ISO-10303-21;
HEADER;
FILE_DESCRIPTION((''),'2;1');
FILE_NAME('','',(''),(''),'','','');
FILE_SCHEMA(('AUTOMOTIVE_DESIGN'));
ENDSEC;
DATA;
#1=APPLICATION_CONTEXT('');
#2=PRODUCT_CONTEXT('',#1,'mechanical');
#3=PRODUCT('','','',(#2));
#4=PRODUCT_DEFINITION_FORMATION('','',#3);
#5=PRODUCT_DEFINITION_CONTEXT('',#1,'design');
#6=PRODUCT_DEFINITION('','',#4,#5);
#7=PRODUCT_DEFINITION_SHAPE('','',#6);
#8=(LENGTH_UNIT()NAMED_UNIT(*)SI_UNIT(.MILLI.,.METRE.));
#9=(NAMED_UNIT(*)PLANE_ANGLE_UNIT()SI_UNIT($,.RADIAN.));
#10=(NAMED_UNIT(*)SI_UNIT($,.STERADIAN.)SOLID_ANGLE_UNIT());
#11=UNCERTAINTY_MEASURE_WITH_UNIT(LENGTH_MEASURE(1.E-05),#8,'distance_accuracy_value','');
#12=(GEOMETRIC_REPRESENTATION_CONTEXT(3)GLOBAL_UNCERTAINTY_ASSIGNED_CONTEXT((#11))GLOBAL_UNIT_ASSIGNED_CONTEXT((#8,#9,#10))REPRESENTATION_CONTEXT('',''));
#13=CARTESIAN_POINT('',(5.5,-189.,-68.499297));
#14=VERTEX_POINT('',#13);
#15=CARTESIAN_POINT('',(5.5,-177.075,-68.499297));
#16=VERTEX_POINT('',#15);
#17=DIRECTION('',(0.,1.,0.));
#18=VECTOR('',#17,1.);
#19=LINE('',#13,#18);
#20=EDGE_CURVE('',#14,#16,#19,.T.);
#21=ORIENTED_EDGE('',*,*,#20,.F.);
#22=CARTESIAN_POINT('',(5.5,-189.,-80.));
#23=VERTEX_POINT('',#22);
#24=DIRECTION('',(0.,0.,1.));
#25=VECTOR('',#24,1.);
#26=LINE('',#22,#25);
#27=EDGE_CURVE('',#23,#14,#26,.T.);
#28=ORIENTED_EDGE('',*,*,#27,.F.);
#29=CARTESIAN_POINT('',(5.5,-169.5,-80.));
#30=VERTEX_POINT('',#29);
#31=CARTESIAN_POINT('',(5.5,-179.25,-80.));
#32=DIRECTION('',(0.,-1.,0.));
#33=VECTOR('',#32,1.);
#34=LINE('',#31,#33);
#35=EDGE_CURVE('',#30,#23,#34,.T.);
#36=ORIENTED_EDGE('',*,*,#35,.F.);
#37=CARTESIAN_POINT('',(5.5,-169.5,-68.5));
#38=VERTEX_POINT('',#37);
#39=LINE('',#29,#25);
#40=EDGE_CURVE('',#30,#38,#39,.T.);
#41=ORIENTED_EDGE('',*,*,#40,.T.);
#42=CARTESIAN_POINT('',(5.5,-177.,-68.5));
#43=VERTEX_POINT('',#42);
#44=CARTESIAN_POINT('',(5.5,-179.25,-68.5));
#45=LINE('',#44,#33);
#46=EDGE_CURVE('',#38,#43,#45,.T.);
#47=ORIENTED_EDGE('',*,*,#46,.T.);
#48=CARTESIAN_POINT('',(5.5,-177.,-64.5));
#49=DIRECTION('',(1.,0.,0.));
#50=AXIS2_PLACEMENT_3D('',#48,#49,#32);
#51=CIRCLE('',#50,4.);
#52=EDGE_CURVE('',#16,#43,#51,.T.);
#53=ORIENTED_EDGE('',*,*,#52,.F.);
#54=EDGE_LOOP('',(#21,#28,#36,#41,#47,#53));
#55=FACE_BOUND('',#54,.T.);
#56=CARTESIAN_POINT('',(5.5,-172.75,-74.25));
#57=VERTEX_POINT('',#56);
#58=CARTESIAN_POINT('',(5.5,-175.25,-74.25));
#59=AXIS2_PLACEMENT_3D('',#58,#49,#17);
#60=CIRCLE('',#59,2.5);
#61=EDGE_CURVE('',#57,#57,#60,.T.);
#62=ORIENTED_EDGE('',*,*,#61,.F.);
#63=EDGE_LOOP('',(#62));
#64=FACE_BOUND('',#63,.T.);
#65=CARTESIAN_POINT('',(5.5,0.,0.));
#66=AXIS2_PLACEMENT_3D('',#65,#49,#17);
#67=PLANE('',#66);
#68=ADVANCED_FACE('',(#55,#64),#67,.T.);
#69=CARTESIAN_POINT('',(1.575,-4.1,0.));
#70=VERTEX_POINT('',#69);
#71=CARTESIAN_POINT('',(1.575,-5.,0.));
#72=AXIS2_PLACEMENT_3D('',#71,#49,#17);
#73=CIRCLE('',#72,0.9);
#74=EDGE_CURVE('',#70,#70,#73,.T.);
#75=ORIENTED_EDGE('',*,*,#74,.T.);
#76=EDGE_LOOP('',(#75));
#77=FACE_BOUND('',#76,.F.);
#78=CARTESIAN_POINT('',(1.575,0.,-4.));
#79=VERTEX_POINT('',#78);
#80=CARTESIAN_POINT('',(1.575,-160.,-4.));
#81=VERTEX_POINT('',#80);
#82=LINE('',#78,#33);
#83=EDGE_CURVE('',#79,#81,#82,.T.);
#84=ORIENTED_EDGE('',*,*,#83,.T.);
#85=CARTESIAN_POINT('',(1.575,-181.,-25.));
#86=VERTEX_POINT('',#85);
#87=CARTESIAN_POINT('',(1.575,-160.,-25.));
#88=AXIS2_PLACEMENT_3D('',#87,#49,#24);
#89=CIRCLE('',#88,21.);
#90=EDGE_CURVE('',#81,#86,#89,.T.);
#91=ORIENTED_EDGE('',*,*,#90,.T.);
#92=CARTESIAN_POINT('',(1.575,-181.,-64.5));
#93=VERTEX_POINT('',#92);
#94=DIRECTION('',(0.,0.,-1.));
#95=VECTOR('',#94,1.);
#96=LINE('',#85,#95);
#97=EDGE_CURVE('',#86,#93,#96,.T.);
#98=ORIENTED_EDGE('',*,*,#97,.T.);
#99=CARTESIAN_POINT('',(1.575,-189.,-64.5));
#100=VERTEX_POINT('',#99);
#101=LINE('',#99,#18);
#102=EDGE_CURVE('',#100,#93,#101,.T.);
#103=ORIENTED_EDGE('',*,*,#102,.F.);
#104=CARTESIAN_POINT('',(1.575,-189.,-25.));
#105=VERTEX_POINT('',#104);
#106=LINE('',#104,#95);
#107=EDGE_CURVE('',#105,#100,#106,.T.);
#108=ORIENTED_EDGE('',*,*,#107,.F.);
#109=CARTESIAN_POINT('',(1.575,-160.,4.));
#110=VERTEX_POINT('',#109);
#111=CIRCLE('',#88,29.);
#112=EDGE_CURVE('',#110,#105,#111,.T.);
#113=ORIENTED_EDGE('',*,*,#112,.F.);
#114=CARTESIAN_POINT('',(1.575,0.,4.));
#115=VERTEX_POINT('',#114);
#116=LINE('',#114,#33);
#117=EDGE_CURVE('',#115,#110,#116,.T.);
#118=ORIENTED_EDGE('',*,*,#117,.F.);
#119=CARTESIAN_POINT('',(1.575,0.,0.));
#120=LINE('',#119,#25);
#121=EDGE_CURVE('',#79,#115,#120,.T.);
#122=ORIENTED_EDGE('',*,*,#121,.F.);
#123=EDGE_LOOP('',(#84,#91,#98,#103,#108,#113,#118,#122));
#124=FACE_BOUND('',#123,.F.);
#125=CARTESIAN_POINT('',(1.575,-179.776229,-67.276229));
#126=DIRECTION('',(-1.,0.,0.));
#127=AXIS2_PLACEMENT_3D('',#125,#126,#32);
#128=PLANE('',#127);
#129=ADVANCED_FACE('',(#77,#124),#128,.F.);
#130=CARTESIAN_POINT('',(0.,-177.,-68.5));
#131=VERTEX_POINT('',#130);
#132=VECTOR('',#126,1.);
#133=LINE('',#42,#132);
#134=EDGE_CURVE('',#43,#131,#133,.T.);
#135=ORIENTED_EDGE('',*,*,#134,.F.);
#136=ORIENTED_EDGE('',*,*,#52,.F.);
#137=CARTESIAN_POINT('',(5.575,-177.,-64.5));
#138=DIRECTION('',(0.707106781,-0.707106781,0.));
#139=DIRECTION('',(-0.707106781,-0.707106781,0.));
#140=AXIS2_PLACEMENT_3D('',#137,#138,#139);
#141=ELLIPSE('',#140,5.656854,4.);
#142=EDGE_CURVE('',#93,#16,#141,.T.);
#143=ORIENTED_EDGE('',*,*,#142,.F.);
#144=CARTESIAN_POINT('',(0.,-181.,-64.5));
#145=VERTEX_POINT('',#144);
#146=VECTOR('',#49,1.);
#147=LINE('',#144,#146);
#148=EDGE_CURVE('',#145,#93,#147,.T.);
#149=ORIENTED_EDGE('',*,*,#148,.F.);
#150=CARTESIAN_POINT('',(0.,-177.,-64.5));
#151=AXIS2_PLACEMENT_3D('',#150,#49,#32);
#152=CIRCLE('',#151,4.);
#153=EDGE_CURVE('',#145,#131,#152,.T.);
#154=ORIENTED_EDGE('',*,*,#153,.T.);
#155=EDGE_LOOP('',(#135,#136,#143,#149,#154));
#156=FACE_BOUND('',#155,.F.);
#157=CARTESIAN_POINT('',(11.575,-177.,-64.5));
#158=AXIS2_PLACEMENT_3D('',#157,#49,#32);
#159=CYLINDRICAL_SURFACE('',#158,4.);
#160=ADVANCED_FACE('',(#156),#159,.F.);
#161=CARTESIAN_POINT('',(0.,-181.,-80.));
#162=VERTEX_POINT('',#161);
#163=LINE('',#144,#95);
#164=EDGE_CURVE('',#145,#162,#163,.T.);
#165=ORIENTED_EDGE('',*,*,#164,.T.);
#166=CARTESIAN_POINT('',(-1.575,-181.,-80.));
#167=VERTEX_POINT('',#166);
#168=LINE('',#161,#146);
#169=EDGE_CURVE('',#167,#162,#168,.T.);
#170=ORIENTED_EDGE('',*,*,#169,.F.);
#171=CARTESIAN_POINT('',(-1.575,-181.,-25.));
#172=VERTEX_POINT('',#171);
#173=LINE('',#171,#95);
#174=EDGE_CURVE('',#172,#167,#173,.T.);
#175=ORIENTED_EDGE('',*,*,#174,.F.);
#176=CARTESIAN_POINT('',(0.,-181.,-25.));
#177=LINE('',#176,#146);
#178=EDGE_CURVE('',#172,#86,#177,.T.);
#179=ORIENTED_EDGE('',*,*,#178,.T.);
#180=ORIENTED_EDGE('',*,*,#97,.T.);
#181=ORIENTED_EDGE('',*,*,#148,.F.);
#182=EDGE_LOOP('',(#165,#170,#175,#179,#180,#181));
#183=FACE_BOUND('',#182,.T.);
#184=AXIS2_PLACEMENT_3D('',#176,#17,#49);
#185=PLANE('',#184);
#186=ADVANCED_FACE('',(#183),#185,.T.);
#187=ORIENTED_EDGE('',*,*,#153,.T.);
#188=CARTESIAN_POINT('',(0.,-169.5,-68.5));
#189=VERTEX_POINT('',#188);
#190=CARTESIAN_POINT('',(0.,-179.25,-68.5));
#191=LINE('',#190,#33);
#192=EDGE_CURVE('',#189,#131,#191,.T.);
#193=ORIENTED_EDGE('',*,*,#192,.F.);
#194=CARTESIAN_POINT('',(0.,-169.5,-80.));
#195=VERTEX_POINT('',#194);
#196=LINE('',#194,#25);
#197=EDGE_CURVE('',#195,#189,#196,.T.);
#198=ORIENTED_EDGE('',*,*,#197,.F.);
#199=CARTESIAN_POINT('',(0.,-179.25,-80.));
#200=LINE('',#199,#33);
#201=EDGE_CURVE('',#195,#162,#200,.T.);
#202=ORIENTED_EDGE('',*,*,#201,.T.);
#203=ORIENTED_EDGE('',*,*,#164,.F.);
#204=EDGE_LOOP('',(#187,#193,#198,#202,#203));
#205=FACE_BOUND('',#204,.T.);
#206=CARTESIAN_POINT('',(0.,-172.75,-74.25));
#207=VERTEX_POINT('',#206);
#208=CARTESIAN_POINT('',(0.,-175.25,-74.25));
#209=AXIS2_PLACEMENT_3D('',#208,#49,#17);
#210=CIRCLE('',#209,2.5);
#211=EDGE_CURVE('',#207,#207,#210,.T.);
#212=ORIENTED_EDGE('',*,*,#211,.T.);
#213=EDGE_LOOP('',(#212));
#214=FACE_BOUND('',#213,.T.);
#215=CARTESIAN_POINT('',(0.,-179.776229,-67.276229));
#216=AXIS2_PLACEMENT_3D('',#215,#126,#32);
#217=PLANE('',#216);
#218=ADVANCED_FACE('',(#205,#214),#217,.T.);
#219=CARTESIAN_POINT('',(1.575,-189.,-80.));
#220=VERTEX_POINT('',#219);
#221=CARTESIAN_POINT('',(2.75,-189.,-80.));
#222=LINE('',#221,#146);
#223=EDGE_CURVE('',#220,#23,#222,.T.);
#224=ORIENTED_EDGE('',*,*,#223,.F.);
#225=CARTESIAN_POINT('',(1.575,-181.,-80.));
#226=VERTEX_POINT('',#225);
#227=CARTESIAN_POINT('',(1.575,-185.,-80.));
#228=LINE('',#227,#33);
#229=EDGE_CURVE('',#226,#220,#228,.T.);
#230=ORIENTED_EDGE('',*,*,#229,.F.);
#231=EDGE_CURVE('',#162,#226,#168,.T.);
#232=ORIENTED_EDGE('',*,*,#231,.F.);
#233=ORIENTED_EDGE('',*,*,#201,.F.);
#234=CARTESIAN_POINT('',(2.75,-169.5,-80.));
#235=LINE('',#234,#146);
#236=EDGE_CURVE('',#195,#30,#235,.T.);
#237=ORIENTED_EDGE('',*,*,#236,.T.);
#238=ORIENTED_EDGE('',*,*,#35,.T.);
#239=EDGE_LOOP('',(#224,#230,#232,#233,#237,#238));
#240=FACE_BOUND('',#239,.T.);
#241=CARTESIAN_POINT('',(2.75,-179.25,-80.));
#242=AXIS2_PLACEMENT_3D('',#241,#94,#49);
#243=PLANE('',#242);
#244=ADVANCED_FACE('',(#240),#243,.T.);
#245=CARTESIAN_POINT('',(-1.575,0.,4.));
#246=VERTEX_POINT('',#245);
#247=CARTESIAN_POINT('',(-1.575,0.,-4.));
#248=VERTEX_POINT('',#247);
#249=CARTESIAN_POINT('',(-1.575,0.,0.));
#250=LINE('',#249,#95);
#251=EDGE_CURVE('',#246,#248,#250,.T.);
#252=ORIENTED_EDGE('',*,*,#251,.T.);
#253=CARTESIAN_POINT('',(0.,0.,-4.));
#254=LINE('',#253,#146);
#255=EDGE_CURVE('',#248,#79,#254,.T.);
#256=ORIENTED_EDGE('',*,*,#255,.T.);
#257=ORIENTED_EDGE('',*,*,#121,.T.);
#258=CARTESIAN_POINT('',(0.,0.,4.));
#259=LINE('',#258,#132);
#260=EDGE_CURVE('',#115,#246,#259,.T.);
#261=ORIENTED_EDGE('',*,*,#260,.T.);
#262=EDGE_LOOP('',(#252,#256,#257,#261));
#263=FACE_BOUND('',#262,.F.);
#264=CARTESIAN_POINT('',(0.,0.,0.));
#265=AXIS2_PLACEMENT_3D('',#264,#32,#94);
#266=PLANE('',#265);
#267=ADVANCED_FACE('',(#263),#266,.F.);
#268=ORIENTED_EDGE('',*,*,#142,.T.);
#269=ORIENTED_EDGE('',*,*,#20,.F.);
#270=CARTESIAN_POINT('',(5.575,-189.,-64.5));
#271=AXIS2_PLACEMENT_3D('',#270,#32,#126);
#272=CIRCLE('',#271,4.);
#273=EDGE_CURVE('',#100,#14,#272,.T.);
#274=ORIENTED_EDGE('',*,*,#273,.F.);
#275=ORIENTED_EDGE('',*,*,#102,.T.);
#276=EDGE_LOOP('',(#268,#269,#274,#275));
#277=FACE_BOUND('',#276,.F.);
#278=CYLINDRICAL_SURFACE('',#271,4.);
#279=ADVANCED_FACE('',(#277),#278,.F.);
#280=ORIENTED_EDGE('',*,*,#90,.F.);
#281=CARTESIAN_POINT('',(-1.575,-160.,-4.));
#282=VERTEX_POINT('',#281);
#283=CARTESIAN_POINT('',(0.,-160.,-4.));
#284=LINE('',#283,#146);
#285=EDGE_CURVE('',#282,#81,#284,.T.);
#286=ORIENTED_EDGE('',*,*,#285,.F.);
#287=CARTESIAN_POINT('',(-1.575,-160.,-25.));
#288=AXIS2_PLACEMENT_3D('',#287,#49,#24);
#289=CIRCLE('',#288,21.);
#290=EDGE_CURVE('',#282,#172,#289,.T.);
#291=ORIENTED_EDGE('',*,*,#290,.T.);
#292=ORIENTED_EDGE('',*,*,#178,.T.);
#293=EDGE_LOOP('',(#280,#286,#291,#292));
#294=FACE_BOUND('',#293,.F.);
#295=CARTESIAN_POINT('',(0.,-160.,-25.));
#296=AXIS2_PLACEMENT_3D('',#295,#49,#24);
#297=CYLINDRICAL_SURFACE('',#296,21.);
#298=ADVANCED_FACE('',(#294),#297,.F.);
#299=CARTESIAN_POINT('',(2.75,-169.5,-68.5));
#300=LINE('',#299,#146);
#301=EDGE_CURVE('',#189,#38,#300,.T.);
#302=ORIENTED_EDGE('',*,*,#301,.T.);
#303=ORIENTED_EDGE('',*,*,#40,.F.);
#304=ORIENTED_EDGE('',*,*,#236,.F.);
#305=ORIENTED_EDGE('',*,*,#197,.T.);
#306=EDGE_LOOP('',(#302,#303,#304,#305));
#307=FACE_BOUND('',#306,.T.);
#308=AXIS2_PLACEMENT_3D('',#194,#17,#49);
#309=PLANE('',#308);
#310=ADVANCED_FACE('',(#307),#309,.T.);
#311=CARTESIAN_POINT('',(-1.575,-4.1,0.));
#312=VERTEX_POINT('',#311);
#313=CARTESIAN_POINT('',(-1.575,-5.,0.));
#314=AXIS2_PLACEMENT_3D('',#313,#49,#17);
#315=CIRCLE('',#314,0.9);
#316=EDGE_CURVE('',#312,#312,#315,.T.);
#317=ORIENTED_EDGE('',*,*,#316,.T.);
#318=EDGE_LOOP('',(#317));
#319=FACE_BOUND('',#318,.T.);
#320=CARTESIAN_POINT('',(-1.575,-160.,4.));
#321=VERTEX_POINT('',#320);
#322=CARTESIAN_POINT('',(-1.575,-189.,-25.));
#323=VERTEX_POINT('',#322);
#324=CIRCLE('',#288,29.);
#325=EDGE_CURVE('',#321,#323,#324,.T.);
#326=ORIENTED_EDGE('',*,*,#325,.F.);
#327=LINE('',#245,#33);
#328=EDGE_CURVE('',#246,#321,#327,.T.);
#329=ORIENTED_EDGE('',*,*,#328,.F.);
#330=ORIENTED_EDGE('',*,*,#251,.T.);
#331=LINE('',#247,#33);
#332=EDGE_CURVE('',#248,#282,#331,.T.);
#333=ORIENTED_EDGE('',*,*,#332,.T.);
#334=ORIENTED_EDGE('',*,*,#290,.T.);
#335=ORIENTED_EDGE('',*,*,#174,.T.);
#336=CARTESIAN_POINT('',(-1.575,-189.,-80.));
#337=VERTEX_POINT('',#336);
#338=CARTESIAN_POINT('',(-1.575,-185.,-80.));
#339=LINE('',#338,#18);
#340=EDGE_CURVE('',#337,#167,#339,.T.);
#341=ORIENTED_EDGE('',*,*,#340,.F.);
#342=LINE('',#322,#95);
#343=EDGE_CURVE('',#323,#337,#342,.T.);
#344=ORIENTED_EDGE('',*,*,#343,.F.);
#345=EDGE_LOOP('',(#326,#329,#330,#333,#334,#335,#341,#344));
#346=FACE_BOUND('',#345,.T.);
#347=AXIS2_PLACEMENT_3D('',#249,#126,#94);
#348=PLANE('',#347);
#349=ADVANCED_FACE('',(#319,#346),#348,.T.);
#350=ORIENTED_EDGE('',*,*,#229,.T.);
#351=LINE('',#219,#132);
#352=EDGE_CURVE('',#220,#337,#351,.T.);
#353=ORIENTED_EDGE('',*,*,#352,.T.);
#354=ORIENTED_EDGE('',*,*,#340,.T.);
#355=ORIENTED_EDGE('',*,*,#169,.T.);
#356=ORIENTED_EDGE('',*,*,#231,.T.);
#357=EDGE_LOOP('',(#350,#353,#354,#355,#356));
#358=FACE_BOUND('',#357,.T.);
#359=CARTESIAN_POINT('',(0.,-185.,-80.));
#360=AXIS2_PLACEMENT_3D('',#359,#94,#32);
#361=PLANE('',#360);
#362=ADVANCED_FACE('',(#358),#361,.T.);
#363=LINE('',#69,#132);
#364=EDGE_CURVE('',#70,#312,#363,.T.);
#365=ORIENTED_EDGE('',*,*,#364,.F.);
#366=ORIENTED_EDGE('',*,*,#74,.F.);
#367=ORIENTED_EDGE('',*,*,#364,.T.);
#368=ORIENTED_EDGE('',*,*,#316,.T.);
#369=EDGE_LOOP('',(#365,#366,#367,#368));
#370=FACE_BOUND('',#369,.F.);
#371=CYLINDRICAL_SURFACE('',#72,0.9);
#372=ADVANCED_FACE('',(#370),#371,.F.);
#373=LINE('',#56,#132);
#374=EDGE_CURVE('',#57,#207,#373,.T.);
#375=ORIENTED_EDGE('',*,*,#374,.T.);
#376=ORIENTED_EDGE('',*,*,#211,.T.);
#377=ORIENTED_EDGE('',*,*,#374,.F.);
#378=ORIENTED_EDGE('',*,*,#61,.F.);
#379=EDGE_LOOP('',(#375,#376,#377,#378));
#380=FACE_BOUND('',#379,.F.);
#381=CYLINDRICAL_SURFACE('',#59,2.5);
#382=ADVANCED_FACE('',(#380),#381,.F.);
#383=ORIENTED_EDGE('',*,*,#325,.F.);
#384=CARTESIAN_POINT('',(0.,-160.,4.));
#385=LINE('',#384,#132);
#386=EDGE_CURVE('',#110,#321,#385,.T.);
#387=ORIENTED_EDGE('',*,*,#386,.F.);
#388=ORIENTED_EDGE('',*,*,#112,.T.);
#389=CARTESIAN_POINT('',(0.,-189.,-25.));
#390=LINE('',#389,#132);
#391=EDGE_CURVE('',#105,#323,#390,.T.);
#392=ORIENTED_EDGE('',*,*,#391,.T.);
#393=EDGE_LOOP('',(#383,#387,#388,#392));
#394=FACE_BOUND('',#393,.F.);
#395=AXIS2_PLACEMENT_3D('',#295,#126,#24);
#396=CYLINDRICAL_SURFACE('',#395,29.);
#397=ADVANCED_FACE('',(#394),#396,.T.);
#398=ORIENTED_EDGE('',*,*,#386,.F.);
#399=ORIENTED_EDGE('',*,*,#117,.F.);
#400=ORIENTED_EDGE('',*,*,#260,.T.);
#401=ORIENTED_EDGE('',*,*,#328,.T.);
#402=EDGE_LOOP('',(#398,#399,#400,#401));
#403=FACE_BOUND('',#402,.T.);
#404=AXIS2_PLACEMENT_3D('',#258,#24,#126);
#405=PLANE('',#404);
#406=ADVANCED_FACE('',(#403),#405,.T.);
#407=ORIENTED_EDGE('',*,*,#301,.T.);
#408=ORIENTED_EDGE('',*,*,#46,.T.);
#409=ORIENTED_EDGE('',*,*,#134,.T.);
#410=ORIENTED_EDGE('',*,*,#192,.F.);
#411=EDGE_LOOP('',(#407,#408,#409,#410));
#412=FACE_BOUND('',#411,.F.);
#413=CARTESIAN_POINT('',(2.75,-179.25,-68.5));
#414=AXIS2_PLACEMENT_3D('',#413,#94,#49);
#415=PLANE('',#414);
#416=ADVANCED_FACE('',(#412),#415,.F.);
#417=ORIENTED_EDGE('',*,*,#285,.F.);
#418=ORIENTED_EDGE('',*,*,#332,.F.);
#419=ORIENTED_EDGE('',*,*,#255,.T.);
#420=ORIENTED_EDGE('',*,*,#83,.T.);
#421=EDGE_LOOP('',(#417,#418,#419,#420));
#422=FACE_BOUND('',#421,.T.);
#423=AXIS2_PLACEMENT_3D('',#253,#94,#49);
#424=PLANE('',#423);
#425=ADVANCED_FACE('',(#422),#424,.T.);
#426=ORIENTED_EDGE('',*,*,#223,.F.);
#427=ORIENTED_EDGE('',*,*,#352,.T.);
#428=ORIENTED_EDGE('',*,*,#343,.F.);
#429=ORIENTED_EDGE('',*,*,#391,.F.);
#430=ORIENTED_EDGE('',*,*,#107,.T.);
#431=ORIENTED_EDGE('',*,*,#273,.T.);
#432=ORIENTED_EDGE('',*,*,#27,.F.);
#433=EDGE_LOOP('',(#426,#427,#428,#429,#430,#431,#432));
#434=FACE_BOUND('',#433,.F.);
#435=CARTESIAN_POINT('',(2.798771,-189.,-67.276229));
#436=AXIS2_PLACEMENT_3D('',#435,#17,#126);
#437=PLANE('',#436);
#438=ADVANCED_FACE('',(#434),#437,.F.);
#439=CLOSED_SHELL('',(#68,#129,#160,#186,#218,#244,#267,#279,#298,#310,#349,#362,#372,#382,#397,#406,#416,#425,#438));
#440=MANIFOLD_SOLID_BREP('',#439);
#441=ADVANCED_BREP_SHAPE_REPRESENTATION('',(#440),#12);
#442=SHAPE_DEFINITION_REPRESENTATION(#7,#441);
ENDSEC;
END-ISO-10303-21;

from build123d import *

# Parameters (mm, degrees)
F2_W         = 3.15
F2_H         = 8
F4_W         = 5.5
F4_H         = 19.5
F5_DEPTH     = 11.5
F6_R         = 2.5
F7_DEPTH     = 5.5
F8_T1_DEPTH  = 1.575
F8_T6_DEPTH  = 8
F8_T12_DEPTH = 18
F8_T17_DEPTH = 11.575
F9_R         = 0.9
F10_DEPTH    = 3.15


# Not quite as in the source:
# - a fillet or chamfer that OpenCascade refuses, or shapes differently, is made with other operations: its cross-section is extruded or revolved along the edge and cut away or added


with BuildPart() as f3:
    # F3: sweep along a path in F1
    with BuildLine(Plane.YZ) as f3_path:
        Line((0, 0), (-160, 0))
        ThreePointArc((-160, 0), (-177.6776695297, -7.3223304703), (-185, -25))
        Line((-185, -25), (-185, -80))
    # F2 (on Front) → F3 (sweep)
    with BuildSketch(Plane.XZ):
        Rectangle(F2_W, F2_H)
    sweep(path=f3_path.line)

    # F4 (on face) → F5 (join)
    with BuildSketch(Plane(origin=(0, 0, -80), x_dir=(1, 0, 0), z_dir=(0, 0, -1))):
        with Locations((2.75, 179.25)):
            Rectangle(F4_W, F4_H)
    extrude(amount=-F5_DEPTH)

    # F6 (on face) → F7 (cut, through all)
    with BuildSketch(Plane.YZ.offset(5.5)):
        with Locations((-175.25, -74.25)):
            Circle(F6_R)
    extrude(amount=-F7_DEPTH, mode=Mode.SUBTRACT)

    # F8: fillet of radius 4 on 2 edges, made by hand

    # F8_s2 → F8_t1 (join)
    with BuildSketch(Plane.YZ):
        with BuildLine():
            ThreePointArc((-181, -64.5), (-179.8284271247, -67.3284271247), (-177, -68.5))
            Line((-177, -68.5), (-181, -68.5))
            Line((-181, -68.5), (-181, -64.5))
        make_face()
    extrude(amount=F8_T1_DEPTH)


with BuildPart() as f8_tool4:
    # F8_s5 → F8_t6 (new body)
    with BuildSketch(Plane.XZ.offset(189)):
        with BuildLine():
            ThreePointArc((1.575, -64.5), (2.7465728753, -67.3284271247), (5.575, -68.5))
            Line((5.575, -68.5), (1.575, -68.5))
            Line((1.575, -68.5), (1.575, -64.5))
        make_face()
    extrude(amount=-F8_T6_DEPTH)

    split(bisect_by=Plane.YZ.offset(5.5), keep=Keep.BOTTOM)


with BuildPart() as f3_1:
    add(f3.part)

    # F8_t3: union F8_tool4
    add(f8_tool4.part)


with BuildPart() as f8_tool10:
    # F8_s11 → F8_t12 (new body)
    with BuildSketch(Plane.XZ.offset(189)):
        with BuildLine():
            ThreePointArc((1.575, -64.5), (2.7465728753, -67.3284271247), (5.575, -68.5))
            Line((5.575, -68.5), (1.575, -68.5))
            Line((1.575, -68.5), (1.575, -64.5))
        make_face()
    extrude(amount=-F8_T12_DEPTH)

    split(bisect_by=Plane.XZ.offset(181), keep=Keep.BOTTOM)

    split(bisect_by=Plane.YZ.offset(5.5), keep=Keep.BOTTOM)


with BuildPart() as f8_tool15:
    # F8_s16 → F8_t17 (new body)
    with BuildSketch(Plane.YZ.offset(11.575)):
        with BuildLine():
            ThreePointArc((-181, -64.5), (-179.8284271247, -67.3284271247), (-177, -68.5))
            Line((-177, -68.5), (-181, -68.5))
            Line((-181, -68.5), (-181, -64.5))
        make_face()
    extrude(amount=-F8_T17_DEPTH)

    split(bisect_by=Plane.YZ.offset(1.575), keep=Keep.TOP)

    split(bisect_by=Plane.YZ.offset(5.5), keep=Keep.BOTTOM)


with BuildPart() as f8_tool10_1:
    add(f8_tool10.part)

    # F8_t20: intersect F8_tool15
    add(f8_tool15.part, mode=Mode.INTERSECT)


with BuildPart() as f3_2:
    add(f3_1.part)

    # F8_t8: union F8_tool10
    add(f8_tool10_1.part)

    # F9 (on face) → F10 (cut, through all)
    with BuildSketch(Plane.YZ.offset(1.575)):
        with Locations((-5, 0)):
            Circle(F9_R)
    extrude(amount=-F10_DEPTH, mode=Mode.SUBTRACT)


solid = f3_2.part
